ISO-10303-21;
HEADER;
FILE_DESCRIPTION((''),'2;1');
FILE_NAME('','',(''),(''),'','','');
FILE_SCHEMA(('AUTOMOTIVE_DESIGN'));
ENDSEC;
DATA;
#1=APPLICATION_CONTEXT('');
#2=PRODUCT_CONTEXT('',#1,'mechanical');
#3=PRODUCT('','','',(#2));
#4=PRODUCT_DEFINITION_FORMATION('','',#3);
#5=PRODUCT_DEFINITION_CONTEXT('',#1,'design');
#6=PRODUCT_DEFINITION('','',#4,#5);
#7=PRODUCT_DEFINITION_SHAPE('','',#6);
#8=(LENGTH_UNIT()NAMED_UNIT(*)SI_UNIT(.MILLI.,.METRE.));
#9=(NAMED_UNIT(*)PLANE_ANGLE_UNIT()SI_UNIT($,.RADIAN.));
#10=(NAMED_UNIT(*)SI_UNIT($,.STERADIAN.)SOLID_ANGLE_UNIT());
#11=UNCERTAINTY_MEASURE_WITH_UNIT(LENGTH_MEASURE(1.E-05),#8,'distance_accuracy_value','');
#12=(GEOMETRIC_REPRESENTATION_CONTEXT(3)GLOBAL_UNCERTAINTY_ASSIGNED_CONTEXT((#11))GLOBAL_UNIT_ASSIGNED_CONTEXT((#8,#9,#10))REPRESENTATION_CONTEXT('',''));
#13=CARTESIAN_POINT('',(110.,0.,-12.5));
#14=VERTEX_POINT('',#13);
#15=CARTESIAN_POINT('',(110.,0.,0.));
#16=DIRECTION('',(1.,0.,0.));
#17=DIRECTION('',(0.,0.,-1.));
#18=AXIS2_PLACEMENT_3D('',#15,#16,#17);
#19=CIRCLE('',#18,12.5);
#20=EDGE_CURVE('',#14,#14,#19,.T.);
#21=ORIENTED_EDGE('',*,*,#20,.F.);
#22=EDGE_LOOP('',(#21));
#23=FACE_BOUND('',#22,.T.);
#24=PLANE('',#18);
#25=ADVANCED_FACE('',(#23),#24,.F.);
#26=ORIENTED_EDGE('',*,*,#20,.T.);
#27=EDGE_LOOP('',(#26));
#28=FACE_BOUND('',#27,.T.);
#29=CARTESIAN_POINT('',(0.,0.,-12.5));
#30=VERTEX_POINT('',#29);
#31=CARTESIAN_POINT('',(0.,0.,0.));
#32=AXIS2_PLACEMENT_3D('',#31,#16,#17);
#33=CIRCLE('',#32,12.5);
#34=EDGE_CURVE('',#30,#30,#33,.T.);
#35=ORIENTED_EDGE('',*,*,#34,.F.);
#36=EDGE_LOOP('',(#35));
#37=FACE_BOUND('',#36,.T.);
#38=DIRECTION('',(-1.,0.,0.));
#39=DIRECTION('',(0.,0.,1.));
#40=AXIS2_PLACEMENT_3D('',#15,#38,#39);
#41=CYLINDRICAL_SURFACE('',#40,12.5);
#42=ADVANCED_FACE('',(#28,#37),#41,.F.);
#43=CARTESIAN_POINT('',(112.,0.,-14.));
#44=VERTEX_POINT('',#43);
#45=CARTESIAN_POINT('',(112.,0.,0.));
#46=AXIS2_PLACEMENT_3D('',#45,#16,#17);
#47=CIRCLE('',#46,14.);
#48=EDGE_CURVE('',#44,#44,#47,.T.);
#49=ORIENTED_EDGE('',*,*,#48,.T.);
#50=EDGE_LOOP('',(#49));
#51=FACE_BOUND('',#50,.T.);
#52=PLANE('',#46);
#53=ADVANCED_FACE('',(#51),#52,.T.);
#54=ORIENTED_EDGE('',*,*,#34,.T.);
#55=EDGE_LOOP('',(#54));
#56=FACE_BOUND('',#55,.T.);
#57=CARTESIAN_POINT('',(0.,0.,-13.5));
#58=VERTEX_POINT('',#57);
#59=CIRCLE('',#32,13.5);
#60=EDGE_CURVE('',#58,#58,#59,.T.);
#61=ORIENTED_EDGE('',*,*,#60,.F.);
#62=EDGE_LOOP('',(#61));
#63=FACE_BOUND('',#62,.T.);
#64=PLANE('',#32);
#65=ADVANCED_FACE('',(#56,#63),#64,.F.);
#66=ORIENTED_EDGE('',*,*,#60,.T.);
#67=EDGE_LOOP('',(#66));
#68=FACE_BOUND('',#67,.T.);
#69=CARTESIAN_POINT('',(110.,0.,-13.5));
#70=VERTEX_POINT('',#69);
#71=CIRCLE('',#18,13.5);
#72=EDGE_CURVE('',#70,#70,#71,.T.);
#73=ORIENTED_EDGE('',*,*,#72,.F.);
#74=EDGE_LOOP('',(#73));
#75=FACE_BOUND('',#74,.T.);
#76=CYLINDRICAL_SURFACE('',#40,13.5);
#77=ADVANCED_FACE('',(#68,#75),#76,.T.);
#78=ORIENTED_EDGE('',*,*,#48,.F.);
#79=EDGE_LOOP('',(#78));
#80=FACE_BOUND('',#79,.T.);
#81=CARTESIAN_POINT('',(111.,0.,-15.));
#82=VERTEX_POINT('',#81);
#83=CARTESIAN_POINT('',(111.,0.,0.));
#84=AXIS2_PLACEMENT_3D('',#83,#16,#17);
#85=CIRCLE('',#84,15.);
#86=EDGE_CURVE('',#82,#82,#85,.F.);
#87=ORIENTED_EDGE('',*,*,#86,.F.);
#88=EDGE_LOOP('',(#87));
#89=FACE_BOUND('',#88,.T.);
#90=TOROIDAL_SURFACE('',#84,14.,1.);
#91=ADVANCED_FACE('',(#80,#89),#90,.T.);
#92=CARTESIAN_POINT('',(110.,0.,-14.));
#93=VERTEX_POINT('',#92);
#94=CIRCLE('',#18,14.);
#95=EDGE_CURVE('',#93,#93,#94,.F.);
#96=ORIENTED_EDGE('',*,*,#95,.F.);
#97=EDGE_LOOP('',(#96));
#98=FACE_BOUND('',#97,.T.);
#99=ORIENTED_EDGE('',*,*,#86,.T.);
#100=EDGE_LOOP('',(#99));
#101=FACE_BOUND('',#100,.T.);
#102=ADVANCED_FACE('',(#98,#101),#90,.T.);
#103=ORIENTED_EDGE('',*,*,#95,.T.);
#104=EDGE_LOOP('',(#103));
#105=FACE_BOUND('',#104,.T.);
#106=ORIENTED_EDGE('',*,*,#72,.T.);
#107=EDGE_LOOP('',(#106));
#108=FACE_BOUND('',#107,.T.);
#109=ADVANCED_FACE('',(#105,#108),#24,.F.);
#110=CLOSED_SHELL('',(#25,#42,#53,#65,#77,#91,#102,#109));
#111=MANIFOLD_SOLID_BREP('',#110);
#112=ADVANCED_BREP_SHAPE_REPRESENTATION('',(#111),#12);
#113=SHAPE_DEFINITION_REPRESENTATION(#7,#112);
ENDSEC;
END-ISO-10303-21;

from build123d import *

# Parameters (mm, degrees)
SKETCH1_R           = 13.5
SKETCH1_R_2         = 12.5
BOSS_EXTRUDE5_DEPTH = 110
SKETCH4_R           = 15
BOSS_EXTRUDE6_DEPTH = 2
FILLET7_R           = 1


with BuildPart() as part:
    # Sketch1 → Boss-Extrude5 (new body)
    with BuildSketch(Plane(origin=(0, 0, 0), x_dir=(0, 0, -1), z_dir=(1, 0, 0))):
        Circle(SKETCH1_R)
        Circle(SKETCH1_R_2, mode=Mode.SUBTRACT)
    extrude(amount=BOSS_EXTRUDE5_DEPTH)

    # Sketch4 → Boss-Extrude6 (add)
    with BuildSketch(Plane(origin=(110, 0, 0), x_dir=(0, 0, -1), z_dir=(1, 0, 0))):
        Circle(SKETCH4_R)
    extrude(amount=BOSS_EXTRUDE6_DEPTH)

    # Fillet7
    fillet7_edges = [part.edges().sort_by_distance(p)[0] for p in [
        (110, 0, 15),
        (112, 0, 15),
    ]]
    fillet(fillet7_edges, radius=FILLET7_R - 0.0001)  # a hair under: the kernel refuses the full size


solid = part.part
